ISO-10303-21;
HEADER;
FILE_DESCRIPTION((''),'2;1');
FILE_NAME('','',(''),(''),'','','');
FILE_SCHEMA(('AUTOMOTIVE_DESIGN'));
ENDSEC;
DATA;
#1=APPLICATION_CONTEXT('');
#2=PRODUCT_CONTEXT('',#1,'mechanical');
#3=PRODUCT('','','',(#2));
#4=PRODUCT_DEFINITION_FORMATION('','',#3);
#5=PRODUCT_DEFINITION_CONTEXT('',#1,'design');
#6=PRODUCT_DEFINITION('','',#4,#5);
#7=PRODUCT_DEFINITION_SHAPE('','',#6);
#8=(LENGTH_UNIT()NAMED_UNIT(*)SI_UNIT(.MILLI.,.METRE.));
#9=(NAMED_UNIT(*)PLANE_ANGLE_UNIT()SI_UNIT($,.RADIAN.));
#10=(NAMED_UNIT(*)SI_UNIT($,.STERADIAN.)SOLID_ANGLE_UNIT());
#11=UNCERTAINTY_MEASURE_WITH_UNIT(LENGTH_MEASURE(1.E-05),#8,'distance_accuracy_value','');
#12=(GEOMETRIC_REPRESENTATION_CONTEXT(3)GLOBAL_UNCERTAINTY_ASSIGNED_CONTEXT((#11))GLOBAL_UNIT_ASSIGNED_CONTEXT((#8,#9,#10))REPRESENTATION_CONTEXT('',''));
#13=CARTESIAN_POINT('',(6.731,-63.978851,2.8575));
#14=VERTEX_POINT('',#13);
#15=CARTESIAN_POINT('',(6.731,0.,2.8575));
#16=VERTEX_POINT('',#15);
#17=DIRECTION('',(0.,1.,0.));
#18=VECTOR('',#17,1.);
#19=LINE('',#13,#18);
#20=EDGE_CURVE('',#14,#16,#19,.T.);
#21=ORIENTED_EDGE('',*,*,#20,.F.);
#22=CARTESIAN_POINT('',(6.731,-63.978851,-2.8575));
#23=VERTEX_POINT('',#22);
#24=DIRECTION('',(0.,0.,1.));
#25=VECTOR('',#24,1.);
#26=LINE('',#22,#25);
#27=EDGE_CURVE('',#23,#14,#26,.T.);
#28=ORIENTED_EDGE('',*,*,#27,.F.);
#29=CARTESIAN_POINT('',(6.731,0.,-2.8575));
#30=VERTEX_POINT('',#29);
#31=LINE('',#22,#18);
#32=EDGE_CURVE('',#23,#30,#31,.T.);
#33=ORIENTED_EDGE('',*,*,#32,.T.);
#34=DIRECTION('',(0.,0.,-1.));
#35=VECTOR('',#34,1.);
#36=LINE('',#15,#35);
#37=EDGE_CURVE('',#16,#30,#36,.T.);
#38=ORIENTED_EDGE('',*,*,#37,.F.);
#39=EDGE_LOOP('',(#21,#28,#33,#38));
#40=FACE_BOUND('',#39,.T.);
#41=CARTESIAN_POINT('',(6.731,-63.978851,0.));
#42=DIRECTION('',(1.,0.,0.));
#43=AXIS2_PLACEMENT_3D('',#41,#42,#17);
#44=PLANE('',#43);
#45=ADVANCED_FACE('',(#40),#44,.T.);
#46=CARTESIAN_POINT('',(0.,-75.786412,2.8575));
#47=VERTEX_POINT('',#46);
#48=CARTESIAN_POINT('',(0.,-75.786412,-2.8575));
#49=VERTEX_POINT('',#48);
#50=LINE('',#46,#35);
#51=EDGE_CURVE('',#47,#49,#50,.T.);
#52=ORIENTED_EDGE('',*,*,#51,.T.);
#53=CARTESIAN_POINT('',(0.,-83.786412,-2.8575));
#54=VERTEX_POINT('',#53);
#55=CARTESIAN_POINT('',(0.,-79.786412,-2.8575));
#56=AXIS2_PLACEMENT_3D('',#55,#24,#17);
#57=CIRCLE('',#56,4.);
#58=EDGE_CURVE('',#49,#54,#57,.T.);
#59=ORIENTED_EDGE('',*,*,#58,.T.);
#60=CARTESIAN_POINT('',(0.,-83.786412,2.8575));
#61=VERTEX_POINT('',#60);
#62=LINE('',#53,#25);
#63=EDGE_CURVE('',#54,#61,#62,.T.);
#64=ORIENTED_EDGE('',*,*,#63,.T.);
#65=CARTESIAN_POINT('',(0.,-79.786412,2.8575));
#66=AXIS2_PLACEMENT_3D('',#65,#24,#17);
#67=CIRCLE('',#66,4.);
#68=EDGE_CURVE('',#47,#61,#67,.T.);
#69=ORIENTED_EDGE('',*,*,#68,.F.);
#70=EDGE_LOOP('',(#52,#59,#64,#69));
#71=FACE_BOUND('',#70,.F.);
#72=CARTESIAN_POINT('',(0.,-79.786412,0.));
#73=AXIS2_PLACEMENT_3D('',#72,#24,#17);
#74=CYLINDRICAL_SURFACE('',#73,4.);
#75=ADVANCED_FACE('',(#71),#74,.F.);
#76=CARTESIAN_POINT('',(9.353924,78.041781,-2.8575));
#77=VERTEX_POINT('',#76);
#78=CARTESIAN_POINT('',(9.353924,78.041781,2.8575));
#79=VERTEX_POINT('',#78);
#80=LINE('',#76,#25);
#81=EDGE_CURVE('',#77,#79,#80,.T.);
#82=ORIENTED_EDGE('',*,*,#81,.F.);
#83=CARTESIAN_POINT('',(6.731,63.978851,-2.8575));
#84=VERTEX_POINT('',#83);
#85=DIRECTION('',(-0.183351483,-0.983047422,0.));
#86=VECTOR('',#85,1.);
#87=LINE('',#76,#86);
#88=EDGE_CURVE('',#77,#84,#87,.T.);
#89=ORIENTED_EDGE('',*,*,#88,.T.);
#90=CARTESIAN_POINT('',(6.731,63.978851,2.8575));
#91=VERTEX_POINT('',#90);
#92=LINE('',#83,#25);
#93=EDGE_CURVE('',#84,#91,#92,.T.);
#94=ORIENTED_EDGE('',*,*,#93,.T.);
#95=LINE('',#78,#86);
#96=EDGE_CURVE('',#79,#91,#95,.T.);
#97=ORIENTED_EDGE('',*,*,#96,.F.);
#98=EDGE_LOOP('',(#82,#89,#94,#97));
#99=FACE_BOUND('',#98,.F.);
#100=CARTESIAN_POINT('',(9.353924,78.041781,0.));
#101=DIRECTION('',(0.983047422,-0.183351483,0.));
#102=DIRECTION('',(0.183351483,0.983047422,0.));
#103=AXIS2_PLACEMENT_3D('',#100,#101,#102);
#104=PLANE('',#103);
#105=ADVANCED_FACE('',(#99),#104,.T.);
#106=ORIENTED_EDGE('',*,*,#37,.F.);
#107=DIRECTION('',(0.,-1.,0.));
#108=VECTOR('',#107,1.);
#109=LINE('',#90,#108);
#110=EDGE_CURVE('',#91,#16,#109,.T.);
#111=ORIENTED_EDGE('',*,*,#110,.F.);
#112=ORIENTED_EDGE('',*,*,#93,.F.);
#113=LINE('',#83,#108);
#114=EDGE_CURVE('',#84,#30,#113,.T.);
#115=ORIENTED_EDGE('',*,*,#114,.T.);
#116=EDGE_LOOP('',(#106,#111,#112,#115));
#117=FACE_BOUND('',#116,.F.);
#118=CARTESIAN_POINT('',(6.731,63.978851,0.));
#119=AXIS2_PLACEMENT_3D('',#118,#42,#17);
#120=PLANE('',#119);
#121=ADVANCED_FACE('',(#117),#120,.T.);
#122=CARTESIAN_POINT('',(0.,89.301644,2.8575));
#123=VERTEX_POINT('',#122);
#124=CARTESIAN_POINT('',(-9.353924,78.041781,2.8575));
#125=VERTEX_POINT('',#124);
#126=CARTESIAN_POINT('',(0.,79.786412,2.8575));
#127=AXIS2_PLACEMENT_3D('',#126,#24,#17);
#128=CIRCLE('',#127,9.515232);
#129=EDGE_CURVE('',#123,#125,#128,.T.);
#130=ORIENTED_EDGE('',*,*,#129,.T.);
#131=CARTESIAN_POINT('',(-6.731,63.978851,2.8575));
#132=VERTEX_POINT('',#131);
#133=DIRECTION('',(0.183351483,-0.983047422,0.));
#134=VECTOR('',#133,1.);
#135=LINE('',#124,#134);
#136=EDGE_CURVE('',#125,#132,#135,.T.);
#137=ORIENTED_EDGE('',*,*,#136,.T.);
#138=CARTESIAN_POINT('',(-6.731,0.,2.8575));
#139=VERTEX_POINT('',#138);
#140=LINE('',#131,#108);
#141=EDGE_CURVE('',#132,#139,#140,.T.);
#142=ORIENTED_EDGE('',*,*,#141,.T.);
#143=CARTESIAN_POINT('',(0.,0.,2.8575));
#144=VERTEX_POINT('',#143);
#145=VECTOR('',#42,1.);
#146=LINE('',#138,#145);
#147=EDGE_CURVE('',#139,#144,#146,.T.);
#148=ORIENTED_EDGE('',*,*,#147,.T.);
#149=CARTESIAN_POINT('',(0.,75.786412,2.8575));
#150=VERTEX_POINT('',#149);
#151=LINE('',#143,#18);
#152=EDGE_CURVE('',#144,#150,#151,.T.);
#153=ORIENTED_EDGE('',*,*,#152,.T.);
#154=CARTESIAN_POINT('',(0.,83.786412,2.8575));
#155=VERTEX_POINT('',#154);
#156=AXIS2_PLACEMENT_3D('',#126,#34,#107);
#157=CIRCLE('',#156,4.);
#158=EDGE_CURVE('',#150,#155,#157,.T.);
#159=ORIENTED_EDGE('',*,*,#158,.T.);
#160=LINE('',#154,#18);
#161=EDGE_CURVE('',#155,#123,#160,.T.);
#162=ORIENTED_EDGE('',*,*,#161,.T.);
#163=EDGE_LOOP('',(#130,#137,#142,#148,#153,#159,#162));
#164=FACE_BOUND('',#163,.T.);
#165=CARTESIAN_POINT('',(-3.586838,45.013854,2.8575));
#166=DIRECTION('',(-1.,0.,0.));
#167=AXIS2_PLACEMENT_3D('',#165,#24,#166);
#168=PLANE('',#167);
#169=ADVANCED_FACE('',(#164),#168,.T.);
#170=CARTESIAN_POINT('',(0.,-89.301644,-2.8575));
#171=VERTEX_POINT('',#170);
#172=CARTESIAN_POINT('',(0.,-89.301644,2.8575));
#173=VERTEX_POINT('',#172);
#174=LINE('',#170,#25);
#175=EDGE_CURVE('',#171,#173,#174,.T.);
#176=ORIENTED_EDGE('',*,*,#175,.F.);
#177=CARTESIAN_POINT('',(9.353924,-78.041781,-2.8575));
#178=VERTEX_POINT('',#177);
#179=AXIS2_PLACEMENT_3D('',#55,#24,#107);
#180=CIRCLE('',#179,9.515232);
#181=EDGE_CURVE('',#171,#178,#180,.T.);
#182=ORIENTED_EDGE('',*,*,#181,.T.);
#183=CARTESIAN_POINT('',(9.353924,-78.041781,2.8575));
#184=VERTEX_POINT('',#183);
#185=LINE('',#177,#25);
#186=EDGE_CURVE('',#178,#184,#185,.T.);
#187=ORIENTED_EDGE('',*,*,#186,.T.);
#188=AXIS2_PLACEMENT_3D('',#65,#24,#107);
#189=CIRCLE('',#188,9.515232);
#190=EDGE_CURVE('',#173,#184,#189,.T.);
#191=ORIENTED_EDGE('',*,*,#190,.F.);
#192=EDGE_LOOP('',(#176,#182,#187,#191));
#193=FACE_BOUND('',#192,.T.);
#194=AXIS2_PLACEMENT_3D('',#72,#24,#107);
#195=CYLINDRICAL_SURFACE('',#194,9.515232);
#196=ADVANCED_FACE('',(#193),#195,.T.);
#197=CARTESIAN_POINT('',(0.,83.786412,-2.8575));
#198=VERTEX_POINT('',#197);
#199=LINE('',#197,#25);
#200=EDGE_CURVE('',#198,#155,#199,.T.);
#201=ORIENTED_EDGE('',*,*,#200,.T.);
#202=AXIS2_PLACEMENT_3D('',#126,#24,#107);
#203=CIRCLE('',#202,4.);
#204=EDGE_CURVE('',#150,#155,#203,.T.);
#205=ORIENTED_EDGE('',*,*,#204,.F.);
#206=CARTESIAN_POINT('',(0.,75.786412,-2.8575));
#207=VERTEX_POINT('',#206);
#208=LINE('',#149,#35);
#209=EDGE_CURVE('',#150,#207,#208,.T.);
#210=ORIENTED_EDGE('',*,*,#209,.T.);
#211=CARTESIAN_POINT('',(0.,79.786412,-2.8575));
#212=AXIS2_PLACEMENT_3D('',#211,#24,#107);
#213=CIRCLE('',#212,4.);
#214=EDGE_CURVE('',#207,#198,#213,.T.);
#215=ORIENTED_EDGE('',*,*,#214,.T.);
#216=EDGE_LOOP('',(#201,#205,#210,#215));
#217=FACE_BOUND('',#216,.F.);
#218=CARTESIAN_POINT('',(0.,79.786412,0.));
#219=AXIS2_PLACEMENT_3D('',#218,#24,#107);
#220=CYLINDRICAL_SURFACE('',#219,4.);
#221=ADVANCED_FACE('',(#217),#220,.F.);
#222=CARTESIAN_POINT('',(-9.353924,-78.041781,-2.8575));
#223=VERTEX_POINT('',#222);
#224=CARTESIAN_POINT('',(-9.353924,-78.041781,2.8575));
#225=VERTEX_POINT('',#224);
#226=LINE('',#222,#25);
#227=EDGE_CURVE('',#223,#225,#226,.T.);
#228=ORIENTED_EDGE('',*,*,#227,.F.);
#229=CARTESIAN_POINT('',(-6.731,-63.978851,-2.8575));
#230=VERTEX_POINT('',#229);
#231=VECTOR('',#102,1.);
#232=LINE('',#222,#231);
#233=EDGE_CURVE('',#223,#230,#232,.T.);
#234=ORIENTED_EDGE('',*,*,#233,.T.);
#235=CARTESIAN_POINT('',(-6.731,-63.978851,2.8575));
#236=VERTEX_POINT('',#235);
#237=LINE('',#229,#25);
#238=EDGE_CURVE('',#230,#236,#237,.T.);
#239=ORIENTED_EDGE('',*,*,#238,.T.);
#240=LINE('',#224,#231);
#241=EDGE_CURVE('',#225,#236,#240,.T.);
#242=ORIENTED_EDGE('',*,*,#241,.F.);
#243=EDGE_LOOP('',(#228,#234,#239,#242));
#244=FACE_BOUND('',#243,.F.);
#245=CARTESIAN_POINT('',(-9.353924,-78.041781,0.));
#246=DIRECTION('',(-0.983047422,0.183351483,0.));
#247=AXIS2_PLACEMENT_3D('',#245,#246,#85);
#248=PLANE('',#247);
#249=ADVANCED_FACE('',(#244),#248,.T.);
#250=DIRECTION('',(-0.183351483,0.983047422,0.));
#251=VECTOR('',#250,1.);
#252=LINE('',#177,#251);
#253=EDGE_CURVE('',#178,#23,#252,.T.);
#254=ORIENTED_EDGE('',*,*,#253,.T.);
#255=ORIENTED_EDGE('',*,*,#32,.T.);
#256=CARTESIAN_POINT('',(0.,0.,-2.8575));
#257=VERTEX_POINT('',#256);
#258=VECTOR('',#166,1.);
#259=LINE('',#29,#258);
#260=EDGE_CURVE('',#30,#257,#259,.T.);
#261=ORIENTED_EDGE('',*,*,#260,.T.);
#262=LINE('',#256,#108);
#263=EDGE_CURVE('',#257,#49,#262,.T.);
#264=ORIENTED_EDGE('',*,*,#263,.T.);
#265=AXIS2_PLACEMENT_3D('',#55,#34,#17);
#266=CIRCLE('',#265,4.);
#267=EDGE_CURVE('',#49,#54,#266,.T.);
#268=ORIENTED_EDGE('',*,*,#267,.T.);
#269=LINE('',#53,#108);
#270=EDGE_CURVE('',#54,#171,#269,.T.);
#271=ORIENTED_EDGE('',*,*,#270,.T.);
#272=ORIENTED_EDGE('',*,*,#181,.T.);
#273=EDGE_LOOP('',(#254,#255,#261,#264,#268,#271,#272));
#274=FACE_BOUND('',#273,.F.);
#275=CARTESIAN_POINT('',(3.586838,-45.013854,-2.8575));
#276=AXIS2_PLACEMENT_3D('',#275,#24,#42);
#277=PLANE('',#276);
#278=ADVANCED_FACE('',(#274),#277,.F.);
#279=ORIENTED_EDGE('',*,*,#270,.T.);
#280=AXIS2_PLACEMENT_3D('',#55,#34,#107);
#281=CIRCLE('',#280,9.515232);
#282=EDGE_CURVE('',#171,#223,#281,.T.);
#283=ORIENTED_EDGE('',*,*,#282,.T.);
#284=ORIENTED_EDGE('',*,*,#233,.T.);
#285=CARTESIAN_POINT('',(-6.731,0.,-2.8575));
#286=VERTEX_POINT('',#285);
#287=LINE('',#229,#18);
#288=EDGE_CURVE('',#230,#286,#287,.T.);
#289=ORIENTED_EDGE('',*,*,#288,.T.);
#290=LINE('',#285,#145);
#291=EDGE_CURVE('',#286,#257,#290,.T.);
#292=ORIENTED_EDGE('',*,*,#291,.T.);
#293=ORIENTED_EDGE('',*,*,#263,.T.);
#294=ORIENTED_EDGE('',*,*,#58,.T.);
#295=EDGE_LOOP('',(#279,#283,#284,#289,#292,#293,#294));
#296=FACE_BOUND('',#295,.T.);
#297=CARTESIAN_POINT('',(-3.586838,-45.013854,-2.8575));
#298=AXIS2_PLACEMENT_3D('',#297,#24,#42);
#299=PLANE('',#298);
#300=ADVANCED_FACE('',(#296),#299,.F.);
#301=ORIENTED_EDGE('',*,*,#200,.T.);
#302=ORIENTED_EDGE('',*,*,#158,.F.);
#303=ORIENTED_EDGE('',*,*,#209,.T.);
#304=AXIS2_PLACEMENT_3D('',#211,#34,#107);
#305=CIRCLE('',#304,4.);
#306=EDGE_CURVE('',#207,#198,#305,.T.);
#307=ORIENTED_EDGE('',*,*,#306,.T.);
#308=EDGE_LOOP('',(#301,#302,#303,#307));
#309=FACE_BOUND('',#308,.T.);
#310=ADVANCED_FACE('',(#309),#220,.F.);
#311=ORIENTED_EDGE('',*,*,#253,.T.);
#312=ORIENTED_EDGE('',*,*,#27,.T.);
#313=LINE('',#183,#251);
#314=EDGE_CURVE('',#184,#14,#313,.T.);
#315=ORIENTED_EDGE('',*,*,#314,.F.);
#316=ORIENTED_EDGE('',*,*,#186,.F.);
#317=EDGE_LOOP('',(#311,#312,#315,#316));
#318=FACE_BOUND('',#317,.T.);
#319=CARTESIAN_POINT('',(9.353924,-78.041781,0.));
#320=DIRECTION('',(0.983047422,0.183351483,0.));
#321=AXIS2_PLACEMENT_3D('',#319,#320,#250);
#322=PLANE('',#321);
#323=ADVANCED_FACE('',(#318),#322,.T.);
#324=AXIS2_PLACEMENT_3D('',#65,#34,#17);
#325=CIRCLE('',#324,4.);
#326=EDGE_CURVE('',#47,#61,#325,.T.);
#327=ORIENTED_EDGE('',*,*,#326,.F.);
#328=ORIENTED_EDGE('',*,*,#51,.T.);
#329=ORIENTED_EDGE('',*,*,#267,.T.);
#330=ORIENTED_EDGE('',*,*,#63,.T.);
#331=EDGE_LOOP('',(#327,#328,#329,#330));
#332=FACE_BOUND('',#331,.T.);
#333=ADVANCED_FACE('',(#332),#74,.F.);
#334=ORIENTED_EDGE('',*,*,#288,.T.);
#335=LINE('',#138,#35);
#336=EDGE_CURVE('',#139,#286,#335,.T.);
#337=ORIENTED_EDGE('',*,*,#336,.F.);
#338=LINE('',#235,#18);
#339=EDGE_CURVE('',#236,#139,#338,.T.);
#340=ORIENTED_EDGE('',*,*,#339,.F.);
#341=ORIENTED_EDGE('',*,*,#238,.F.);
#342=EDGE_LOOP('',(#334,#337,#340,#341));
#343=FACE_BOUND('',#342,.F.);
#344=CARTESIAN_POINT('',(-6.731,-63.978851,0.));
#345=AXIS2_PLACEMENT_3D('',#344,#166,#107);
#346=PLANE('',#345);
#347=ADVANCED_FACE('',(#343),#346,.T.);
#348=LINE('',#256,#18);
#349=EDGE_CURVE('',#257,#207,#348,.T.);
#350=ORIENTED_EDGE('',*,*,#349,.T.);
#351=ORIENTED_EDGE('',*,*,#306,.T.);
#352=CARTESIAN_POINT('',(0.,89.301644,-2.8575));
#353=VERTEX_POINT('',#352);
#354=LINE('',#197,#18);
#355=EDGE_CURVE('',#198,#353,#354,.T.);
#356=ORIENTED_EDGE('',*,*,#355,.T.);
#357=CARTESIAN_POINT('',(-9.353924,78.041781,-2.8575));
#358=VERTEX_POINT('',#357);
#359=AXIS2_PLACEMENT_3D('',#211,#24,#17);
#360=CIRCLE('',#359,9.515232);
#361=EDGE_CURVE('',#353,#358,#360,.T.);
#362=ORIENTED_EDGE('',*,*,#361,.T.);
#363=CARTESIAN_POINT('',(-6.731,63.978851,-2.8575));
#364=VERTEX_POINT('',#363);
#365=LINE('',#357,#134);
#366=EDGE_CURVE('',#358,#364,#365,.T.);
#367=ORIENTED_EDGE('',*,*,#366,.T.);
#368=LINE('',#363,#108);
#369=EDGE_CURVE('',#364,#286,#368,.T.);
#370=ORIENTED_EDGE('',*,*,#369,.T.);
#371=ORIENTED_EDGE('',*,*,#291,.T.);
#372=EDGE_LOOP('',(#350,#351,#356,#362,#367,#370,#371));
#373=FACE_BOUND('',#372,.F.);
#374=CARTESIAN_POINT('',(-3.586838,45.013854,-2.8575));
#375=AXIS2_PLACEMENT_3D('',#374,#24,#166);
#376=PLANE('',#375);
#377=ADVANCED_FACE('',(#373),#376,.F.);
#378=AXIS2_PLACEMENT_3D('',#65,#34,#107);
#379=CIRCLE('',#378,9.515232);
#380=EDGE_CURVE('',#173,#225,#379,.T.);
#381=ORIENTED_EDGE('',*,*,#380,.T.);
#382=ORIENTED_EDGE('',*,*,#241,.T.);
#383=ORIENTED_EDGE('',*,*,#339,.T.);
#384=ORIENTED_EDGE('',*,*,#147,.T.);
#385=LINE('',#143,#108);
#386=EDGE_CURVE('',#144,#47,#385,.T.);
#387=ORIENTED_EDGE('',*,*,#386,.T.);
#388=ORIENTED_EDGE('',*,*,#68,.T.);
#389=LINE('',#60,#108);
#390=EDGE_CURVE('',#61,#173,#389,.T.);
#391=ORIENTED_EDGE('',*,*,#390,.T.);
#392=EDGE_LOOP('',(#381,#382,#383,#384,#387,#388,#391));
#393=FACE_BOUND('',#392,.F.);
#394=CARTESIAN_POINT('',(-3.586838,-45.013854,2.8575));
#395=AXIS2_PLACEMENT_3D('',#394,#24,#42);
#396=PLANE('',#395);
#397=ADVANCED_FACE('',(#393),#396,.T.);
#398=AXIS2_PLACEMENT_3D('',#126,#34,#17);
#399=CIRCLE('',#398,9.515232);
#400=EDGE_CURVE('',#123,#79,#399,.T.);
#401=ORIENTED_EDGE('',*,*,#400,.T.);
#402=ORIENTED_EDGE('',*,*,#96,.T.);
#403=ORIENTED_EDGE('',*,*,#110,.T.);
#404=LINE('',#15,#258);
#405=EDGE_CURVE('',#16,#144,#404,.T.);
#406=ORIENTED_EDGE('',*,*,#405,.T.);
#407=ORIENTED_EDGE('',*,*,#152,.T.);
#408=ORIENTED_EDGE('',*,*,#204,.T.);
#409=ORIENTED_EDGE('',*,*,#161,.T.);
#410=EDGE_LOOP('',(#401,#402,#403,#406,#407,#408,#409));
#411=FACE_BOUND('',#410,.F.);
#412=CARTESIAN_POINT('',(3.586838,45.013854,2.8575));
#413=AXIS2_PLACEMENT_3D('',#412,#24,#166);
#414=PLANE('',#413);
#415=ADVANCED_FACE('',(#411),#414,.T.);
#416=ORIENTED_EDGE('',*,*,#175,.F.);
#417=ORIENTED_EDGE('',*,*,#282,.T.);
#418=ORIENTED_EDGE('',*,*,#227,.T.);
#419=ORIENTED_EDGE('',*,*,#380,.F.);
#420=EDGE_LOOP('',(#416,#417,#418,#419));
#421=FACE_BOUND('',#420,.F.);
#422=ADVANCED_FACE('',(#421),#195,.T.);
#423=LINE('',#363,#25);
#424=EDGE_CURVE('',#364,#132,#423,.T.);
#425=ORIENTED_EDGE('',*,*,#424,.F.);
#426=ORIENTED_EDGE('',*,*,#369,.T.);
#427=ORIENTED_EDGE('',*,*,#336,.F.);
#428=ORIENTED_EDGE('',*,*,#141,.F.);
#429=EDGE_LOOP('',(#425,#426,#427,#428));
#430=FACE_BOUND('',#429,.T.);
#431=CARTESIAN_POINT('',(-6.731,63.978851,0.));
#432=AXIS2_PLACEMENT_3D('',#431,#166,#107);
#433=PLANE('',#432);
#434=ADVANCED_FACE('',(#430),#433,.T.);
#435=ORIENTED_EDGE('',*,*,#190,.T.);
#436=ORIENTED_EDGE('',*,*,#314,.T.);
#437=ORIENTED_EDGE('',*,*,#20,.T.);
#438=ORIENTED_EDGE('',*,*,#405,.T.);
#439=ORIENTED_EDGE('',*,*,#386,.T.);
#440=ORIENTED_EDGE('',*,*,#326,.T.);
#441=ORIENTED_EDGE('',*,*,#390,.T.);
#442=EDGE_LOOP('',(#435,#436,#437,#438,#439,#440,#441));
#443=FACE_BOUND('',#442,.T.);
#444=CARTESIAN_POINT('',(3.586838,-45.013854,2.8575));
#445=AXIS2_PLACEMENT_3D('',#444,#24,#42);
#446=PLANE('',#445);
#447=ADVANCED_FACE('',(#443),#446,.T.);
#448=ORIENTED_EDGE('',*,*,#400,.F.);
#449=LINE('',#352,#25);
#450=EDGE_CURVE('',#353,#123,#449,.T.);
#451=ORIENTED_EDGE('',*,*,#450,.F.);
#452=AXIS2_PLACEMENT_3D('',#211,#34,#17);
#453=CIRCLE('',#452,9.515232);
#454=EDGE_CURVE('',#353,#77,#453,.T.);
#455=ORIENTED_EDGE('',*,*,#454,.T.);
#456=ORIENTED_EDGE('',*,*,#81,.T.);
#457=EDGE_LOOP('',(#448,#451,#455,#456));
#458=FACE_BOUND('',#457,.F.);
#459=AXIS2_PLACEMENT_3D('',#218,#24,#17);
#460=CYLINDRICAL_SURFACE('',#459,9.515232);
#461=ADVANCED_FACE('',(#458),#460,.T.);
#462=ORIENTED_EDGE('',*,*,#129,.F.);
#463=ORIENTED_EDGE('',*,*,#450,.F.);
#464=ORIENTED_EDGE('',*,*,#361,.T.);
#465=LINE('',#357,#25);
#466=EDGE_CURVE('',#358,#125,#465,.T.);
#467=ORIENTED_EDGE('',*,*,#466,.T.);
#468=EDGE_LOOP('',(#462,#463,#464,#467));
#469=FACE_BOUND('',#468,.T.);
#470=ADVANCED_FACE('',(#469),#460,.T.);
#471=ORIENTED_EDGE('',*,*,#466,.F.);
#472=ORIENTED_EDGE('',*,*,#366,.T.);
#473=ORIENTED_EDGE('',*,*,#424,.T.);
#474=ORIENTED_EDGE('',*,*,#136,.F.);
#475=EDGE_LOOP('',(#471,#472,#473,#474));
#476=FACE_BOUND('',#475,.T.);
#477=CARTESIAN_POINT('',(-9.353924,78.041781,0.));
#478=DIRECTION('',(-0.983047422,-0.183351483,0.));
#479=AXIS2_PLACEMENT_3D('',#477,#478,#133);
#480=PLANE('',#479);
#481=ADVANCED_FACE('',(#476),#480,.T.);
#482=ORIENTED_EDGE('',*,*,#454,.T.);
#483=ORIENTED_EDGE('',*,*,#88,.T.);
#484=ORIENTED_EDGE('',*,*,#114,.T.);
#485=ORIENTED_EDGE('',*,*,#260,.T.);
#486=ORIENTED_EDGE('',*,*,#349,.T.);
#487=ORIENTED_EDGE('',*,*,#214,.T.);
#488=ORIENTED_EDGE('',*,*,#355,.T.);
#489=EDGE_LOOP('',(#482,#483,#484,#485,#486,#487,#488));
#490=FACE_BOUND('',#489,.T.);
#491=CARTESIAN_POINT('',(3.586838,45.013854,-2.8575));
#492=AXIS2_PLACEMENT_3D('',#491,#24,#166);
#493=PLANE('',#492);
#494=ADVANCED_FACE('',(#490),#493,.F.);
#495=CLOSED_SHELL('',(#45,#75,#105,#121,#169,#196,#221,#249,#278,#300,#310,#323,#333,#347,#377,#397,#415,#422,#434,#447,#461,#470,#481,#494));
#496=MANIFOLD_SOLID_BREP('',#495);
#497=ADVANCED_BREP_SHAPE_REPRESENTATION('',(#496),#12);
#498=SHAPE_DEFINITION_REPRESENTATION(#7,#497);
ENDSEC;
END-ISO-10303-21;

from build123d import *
from build123d import SkipClean  # not in build123d's __all__

# Parameters (mm, degrees)
F1_DEPTH = 2.8575


with BuildPart() as f1:
    # F0 (on Top) → F1 (new body, symmetric)
    with BuildSketch(Plane.XY):
        with BuildLine():
            ThreePointArc((0, -75.7864124179), (4, -79.7864124179), (0, -83.7864124179))
            Line((0, -83.7864124179), (0, -89.3016444676))
            ThreePointArc((0, -89.3016444676), (7.3191604153, -85.8666699597), (9.3539243357, -78.0417805136))
            Line((9.3539243357, -78.0417805136), (6.731, -63.9788508415))
            Line((6.731, -63.9788508415), (6.731, 0))
            Line((6.731, 0), (0, 0))
            Line((0, 0), (0, -75.7864124179))
        make_face()
    extrude(amount=F1_DEPTH, both=True)

    # F2: F1 across plane


with BuildPart() as f1_1:
    add(f1.part, clean=False)
    with SkipClean():  # cleaning this boolean's faces spoils the solid; the shape is the same uncleaned
        add(f1.part.mirror(Plane.YZ), clean=False)

    # F3: F1 across plane


with BuildPart() as f1_2:
    add(f1_1.part, clean=False)
    add(f1_1.part.mirror(Plane.XZ), clean=False)


solid = f1_2.part
